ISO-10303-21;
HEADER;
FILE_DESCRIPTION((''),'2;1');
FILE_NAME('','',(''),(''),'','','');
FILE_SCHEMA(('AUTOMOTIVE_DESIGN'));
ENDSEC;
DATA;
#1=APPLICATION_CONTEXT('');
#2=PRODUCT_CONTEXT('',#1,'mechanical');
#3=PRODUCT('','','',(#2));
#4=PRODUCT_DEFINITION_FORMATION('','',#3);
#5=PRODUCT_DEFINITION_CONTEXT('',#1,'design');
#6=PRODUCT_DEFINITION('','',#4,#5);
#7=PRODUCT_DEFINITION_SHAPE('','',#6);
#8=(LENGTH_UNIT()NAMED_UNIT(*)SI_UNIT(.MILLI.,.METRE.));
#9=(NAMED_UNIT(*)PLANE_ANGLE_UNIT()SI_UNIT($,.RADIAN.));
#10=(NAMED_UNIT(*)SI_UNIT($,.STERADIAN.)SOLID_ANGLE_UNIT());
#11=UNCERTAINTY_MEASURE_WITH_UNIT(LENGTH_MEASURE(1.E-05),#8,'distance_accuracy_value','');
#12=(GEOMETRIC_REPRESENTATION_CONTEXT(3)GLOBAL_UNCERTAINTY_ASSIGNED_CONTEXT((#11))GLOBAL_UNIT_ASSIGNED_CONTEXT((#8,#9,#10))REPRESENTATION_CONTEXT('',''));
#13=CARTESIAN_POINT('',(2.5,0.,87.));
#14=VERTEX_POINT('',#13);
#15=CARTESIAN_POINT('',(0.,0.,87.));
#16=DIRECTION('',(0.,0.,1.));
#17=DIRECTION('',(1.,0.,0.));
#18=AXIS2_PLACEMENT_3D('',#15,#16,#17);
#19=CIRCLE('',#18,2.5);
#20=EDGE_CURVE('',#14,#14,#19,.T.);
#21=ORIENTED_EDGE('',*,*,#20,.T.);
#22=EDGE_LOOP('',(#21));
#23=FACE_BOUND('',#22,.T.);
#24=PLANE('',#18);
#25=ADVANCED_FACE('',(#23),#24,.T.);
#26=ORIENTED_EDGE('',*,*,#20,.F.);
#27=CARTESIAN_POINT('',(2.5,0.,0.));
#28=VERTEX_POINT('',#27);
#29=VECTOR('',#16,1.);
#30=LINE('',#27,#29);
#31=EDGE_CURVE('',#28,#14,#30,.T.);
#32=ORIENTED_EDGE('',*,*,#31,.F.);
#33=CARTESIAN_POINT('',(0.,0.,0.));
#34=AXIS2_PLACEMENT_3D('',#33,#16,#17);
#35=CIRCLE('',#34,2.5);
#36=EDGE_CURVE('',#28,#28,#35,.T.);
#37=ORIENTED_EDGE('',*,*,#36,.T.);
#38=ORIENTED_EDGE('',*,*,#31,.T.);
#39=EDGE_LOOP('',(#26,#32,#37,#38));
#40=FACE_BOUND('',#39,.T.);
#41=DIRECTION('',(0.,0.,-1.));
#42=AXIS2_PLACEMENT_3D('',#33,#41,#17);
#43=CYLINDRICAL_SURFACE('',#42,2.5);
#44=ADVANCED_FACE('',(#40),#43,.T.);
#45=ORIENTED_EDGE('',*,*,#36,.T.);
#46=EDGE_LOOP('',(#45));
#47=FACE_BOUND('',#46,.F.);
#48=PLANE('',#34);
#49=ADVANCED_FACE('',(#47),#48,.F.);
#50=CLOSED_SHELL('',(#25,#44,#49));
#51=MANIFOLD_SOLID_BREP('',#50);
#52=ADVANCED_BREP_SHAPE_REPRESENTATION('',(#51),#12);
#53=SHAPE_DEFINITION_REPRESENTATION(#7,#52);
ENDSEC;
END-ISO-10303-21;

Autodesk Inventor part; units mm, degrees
ref_plane "YZ Plane" through (0, 0, 0) normal (1, 0, 0) x (0, 1, 0)
ref_plane "XZ Plane" through (0, 0, 0) normal (0, 1, 0) x (-1, 0, 0)
ref_plane "XY Plane" through (0, 0, 0) normal (0, 0, 1) x (1, 0, 0)
sketch "Sketch1" plane through (0, 0, 0) normal (0, 0, 1) x (1, 0, 0)
  circle A0 centre (0, 0) radius 2.5
  dimension "d0" = 5
extrude "Extrusion1" add sketch "Sketch1" along normal blind 87
thread "Thread1" size "M5x0.8" class "6g" standard "ANSI Metric M Profile" length 8
equation "\"BendRadius\" = Thickness"
equation "\"BendReliefWidth\" = Thickness"
equation "\"BendReliefDepth\" = 0.5 * Thickness"
equation "\"CornerReliefSize\" = 4 * Thickness"
equation "\"MinimumRemnant\" = 2 * Thickness"
equation "\"TransitionRadius\" = BendRadius"
equation "\"JacobiRadiusSize\" = BendRadius"
equation "\"GapSize\" = Thickness"
equation "\"Thickness\" = 3.048"
properties part number "Przesuwnica" material "Stainless Steel"
